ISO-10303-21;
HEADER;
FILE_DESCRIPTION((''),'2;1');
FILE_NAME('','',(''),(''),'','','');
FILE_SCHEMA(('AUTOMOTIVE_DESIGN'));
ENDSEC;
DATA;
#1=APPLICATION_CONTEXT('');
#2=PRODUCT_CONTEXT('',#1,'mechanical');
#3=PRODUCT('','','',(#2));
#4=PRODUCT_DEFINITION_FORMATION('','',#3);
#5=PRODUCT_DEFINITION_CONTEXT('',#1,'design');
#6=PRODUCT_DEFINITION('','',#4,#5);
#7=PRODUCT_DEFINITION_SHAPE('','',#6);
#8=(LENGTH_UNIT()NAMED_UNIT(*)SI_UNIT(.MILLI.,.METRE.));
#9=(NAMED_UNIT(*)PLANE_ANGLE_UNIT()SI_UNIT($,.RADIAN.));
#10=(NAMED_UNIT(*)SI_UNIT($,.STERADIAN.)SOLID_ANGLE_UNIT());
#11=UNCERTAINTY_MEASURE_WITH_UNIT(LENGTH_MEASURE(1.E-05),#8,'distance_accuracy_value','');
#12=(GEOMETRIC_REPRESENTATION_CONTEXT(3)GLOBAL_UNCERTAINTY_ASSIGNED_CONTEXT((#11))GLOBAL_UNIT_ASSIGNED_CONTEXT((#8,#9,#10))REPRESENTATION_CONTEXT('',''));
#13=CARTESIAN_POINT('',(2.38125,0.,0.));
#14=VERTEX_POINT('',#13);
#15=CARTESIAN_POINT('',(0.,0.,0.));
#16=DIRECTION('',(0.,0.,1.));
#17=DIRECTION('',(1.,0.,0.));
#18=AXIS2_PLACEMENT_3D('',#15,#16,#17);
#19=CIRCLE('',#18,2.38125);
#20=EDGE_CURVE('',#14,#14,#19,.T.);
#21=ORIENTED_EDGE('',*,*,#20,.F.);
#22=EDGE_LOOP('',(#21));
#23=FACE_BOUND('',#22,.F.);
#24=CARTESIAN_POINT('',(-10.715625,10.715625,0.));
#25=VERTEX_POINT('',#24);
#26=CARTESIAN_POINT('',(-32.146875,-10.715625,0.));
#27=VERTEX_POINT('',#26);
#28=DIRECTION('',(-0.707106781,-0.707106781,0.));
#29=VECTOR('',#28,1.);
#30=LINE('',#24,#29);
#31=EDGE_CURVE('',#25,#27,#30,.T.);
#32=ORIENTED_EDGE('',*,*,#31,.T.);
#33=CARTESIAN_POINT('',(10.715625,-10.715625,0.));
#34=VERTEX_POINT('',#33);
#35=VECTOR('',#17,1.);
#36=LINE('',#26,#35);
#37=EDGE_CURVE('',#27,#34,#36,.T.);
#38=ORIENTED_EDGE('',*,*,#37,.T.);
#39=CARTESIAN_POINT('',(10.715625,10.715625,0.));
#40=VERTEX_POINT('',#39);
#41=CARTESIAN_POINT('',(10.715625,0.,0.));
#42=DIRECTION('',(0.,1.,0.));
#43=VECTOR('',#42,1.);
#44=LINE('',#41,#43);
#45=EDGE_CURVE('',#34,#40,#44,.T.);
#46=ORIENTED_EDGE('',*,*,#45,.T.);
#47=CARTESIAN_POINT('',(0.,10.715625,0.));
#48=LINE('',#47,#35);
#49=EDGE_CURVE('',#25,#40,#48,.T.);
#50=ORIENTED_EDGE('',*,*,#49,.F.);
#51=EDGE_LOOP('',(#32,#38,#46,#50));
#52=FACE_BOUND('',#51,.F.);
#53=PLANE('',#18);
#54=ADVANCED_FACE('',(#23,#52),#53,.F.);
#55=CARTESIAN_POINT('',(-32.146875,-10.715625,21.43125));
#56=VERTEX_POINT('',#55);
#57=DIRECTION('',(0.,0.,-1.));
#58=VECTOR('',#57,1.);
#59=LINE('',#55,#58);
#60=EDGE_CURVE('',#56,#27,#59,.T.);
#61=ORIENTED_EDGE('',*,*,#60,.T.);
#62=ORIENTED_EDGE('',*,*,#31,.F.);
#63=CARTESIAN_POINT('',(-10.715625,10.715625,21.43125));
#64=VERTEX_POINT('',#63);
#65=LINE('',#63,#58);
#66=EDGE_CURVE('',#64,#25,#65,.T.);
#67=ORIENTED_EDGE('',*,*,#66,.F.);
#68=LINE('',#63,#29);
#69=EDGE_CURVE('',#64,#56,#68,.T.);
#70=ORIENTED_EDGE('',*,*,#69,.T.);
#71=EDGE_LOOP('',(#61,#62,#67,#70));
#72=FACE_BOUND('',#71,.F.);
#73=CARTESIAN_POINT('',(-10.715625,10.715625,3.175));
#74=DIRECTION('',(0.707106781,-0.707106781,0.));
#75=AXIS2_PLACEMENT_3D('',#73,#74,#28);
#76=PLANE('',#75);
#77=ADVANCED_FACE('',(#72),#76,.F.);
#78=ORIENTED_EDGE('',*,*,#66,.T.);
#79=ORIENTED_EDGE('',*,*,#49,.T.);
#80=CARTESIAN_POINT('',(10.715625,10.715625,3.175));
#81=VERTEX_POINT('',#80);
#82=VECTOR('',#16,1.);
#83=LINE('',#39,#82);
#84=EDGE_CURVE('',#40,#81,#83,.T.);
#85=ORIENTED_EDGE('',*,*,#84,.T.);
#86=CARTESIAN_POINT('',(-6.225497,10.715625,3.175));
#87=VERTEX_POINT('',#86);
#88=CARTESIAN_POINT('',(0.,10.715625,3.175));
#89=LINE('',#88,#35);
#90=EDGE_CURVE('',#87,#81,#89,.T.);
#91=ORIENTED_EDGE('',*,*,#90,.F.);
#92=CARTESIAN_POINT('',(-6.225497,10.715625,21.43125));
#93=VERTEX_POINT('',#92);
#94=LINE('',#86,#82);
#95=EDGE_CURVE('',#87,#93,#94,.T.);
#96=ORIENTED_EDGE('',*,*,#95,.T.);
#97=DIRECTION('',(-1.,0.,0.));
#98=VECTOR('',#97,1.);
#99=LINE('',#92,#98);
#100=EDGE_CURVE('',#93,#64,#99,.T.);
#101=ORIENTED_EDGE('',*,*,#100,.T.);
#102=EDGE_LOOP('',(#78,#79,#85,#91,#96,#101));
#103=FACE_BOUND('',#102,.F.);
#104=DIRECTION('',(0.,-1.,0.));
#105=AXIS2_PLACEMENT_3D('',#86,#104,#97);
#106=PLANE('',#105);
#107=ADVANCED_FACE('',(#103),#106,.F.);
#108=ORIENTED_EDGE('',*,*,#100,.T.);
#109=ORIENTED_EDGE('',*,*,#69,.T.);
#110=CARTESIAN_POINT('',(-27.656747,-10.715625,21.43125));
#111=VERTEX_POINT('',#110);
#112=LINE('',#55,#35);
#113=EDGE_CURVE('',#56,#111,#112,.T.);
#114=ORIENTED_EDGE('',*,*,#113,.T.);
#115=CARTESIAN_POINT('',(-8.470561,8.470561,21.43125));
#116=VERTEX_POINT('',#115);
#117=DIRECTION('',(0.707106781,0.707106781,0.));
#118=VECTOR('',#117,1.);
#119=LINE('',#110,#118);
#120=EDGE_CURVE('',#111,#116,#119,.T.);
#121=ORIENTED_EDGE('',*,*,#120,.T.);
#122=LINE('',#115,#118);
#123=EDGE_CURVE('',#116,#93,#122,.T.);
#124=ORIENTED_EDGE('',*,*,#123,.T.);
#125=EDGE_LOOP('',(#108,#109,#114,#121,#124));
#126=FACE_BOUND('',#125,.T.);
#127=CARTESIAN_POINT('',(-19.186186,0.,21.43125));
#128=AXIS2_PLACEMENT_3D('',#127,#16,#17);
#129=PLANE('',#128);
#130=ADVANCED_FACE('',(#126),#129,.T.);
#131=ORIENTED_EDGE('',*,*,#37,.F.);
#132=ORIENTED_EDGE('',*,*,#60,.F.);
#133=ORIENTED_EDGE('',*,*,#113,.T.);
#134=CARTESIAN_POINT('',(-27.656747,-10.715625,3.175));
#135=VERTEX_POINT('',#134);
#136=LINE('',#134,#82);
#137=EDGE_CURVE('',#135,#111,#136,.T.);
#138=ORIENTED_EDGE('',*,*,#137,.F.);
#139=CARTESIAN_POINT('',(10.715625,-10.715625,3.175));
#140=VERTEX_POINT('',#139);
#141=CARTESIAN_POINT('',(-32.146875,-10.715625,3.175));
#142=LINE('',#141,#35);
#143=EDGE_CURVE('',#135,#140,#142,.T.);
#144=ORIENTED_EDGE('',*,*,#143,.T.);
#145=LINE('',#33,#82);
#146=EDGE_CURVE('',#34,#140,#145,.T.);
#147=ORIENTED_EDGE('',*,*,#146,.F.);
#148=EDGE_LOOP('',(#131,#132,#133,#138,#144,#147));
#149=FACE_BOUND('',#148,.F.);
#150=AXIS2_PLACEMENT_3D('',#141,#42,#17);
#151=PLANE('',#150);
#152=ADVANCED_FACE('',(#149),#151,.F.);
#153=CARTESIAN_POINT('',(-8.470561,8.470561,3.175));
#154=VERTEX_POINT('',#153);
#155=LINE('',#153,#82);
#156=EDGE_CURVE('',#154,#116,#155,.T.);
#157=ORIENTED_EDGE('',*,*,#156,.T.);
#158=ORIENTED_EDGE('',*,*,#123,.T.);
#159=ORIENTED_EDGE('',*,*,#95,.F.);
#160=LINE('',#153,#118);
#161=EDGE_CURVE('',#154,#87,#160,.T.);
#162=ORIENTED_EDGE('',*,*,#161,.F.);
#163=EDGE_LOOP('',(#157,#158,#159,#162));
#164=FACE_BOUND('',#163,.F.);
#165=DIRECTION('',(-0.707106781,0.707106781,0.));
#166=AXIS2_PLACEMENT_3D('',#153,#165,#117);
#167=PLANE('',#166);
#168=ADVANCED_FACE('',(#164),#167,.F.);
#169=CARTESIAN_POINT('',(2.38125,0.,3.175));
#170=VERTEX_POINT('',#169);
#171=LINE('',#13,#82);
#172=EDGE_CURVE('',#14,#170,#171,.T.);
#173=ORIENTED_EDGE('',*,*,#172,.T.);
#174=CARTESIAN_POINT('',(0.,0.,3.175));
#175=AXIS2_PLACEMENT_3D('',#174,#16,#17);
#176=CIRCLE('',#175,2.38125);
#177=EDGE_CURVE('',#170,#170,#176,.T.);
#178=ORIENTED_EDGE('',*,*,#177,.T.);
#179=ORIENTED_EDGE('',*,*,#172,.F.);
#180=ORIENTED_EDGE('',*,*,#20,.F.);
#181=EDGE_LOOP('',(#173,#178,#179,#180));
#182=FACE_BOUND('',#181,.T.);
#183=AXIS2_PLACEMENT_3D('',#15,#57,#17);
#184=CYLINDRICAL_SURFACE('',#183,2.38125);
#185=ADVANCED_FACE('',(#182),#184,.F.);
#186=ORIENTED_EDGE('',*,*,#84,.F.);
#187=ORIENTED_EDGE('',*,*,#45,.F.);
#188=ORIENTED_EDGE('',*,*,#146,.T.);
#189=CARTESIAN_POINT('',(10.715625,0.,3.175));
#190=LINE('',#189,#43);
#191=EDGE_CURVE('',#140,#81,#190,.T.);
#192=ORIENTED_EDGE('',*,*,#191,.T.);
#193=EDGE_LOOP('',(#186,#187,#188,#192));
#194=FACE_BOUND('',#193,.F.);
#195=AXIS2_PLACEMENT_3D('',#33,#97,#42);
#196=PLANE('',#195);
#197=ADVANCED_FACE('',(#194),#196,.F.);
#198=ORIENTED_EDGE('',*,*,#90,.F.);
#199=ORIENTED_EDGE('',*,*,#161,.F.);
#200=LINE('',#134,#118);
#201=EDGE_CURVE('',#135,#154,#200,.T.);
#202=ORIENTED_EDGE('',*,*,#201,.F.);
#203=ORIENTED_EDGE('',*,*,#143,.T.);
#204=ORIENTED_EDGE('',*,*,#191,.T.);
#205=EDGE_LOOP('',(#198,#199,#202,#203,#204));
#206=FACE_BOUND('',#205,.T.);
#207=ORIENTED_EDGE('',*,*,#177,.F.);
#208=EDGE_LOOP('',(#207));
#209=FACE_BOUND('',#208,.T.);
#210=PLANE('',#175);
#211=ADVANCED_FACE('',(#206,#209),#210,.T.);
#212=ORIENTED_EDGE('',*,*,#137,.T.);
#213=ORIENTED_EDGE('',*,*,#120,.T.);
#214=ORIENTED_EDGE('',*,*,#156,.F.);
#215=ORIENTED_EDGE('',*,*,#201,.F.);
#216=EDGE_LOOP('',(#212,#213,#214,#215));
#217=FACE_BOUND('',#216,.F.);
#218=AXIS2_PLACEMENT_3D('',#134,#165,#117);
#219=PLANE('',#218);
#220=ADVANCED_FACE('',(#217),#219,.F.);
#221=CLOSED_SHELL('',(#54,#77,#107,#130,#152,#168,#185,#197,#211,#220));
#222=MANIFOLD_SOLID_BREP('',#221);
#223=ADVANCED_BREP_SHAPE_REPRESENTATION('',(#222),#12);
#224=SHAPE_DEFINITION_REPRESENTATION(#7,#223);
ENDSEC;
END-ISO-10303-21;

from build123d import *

# Parameters (mm, degrees)
F0_W     = 21.43125
F0_H     = 21.43125
F0_R     = 2.38125
F1_DEPTH = 3.175
F3_DEPTH = 18.25625


# Not quite as in the source:
# - a length typed as a fraction of an inch, garbled in the dataset ("3 / 203.2 mm" for 3/8 in), is restored


with BuildPart() as f1:
    # F0 (on Top) → F1 (new body)
    with BuildSketch(Plane.XY):
        Rectangle(F0_W, F0_H)
        Circle(F0_R, mode=Mode.SUBTRACT)
        Polygon((-10.715625, -10.715625), (-10.715625, 10.715625), (-32.146875, -10.715625), align=None)
    extrude(amount=F1_DEPTH)

    # F2 (on face) → F3 (join)
    with BuildSketch(Plane.XY.offset(3.175)):
        Polygon((-27.6567469395, -10.715625), (-8.4705609697, 8.4705609697), (-6.2254969395, 10.715625), (-10.715625, 10.715625), (-32.146875, -10.715625), align=None)
    extrude(amount=F3_DEPTH)


solid = f1.part
